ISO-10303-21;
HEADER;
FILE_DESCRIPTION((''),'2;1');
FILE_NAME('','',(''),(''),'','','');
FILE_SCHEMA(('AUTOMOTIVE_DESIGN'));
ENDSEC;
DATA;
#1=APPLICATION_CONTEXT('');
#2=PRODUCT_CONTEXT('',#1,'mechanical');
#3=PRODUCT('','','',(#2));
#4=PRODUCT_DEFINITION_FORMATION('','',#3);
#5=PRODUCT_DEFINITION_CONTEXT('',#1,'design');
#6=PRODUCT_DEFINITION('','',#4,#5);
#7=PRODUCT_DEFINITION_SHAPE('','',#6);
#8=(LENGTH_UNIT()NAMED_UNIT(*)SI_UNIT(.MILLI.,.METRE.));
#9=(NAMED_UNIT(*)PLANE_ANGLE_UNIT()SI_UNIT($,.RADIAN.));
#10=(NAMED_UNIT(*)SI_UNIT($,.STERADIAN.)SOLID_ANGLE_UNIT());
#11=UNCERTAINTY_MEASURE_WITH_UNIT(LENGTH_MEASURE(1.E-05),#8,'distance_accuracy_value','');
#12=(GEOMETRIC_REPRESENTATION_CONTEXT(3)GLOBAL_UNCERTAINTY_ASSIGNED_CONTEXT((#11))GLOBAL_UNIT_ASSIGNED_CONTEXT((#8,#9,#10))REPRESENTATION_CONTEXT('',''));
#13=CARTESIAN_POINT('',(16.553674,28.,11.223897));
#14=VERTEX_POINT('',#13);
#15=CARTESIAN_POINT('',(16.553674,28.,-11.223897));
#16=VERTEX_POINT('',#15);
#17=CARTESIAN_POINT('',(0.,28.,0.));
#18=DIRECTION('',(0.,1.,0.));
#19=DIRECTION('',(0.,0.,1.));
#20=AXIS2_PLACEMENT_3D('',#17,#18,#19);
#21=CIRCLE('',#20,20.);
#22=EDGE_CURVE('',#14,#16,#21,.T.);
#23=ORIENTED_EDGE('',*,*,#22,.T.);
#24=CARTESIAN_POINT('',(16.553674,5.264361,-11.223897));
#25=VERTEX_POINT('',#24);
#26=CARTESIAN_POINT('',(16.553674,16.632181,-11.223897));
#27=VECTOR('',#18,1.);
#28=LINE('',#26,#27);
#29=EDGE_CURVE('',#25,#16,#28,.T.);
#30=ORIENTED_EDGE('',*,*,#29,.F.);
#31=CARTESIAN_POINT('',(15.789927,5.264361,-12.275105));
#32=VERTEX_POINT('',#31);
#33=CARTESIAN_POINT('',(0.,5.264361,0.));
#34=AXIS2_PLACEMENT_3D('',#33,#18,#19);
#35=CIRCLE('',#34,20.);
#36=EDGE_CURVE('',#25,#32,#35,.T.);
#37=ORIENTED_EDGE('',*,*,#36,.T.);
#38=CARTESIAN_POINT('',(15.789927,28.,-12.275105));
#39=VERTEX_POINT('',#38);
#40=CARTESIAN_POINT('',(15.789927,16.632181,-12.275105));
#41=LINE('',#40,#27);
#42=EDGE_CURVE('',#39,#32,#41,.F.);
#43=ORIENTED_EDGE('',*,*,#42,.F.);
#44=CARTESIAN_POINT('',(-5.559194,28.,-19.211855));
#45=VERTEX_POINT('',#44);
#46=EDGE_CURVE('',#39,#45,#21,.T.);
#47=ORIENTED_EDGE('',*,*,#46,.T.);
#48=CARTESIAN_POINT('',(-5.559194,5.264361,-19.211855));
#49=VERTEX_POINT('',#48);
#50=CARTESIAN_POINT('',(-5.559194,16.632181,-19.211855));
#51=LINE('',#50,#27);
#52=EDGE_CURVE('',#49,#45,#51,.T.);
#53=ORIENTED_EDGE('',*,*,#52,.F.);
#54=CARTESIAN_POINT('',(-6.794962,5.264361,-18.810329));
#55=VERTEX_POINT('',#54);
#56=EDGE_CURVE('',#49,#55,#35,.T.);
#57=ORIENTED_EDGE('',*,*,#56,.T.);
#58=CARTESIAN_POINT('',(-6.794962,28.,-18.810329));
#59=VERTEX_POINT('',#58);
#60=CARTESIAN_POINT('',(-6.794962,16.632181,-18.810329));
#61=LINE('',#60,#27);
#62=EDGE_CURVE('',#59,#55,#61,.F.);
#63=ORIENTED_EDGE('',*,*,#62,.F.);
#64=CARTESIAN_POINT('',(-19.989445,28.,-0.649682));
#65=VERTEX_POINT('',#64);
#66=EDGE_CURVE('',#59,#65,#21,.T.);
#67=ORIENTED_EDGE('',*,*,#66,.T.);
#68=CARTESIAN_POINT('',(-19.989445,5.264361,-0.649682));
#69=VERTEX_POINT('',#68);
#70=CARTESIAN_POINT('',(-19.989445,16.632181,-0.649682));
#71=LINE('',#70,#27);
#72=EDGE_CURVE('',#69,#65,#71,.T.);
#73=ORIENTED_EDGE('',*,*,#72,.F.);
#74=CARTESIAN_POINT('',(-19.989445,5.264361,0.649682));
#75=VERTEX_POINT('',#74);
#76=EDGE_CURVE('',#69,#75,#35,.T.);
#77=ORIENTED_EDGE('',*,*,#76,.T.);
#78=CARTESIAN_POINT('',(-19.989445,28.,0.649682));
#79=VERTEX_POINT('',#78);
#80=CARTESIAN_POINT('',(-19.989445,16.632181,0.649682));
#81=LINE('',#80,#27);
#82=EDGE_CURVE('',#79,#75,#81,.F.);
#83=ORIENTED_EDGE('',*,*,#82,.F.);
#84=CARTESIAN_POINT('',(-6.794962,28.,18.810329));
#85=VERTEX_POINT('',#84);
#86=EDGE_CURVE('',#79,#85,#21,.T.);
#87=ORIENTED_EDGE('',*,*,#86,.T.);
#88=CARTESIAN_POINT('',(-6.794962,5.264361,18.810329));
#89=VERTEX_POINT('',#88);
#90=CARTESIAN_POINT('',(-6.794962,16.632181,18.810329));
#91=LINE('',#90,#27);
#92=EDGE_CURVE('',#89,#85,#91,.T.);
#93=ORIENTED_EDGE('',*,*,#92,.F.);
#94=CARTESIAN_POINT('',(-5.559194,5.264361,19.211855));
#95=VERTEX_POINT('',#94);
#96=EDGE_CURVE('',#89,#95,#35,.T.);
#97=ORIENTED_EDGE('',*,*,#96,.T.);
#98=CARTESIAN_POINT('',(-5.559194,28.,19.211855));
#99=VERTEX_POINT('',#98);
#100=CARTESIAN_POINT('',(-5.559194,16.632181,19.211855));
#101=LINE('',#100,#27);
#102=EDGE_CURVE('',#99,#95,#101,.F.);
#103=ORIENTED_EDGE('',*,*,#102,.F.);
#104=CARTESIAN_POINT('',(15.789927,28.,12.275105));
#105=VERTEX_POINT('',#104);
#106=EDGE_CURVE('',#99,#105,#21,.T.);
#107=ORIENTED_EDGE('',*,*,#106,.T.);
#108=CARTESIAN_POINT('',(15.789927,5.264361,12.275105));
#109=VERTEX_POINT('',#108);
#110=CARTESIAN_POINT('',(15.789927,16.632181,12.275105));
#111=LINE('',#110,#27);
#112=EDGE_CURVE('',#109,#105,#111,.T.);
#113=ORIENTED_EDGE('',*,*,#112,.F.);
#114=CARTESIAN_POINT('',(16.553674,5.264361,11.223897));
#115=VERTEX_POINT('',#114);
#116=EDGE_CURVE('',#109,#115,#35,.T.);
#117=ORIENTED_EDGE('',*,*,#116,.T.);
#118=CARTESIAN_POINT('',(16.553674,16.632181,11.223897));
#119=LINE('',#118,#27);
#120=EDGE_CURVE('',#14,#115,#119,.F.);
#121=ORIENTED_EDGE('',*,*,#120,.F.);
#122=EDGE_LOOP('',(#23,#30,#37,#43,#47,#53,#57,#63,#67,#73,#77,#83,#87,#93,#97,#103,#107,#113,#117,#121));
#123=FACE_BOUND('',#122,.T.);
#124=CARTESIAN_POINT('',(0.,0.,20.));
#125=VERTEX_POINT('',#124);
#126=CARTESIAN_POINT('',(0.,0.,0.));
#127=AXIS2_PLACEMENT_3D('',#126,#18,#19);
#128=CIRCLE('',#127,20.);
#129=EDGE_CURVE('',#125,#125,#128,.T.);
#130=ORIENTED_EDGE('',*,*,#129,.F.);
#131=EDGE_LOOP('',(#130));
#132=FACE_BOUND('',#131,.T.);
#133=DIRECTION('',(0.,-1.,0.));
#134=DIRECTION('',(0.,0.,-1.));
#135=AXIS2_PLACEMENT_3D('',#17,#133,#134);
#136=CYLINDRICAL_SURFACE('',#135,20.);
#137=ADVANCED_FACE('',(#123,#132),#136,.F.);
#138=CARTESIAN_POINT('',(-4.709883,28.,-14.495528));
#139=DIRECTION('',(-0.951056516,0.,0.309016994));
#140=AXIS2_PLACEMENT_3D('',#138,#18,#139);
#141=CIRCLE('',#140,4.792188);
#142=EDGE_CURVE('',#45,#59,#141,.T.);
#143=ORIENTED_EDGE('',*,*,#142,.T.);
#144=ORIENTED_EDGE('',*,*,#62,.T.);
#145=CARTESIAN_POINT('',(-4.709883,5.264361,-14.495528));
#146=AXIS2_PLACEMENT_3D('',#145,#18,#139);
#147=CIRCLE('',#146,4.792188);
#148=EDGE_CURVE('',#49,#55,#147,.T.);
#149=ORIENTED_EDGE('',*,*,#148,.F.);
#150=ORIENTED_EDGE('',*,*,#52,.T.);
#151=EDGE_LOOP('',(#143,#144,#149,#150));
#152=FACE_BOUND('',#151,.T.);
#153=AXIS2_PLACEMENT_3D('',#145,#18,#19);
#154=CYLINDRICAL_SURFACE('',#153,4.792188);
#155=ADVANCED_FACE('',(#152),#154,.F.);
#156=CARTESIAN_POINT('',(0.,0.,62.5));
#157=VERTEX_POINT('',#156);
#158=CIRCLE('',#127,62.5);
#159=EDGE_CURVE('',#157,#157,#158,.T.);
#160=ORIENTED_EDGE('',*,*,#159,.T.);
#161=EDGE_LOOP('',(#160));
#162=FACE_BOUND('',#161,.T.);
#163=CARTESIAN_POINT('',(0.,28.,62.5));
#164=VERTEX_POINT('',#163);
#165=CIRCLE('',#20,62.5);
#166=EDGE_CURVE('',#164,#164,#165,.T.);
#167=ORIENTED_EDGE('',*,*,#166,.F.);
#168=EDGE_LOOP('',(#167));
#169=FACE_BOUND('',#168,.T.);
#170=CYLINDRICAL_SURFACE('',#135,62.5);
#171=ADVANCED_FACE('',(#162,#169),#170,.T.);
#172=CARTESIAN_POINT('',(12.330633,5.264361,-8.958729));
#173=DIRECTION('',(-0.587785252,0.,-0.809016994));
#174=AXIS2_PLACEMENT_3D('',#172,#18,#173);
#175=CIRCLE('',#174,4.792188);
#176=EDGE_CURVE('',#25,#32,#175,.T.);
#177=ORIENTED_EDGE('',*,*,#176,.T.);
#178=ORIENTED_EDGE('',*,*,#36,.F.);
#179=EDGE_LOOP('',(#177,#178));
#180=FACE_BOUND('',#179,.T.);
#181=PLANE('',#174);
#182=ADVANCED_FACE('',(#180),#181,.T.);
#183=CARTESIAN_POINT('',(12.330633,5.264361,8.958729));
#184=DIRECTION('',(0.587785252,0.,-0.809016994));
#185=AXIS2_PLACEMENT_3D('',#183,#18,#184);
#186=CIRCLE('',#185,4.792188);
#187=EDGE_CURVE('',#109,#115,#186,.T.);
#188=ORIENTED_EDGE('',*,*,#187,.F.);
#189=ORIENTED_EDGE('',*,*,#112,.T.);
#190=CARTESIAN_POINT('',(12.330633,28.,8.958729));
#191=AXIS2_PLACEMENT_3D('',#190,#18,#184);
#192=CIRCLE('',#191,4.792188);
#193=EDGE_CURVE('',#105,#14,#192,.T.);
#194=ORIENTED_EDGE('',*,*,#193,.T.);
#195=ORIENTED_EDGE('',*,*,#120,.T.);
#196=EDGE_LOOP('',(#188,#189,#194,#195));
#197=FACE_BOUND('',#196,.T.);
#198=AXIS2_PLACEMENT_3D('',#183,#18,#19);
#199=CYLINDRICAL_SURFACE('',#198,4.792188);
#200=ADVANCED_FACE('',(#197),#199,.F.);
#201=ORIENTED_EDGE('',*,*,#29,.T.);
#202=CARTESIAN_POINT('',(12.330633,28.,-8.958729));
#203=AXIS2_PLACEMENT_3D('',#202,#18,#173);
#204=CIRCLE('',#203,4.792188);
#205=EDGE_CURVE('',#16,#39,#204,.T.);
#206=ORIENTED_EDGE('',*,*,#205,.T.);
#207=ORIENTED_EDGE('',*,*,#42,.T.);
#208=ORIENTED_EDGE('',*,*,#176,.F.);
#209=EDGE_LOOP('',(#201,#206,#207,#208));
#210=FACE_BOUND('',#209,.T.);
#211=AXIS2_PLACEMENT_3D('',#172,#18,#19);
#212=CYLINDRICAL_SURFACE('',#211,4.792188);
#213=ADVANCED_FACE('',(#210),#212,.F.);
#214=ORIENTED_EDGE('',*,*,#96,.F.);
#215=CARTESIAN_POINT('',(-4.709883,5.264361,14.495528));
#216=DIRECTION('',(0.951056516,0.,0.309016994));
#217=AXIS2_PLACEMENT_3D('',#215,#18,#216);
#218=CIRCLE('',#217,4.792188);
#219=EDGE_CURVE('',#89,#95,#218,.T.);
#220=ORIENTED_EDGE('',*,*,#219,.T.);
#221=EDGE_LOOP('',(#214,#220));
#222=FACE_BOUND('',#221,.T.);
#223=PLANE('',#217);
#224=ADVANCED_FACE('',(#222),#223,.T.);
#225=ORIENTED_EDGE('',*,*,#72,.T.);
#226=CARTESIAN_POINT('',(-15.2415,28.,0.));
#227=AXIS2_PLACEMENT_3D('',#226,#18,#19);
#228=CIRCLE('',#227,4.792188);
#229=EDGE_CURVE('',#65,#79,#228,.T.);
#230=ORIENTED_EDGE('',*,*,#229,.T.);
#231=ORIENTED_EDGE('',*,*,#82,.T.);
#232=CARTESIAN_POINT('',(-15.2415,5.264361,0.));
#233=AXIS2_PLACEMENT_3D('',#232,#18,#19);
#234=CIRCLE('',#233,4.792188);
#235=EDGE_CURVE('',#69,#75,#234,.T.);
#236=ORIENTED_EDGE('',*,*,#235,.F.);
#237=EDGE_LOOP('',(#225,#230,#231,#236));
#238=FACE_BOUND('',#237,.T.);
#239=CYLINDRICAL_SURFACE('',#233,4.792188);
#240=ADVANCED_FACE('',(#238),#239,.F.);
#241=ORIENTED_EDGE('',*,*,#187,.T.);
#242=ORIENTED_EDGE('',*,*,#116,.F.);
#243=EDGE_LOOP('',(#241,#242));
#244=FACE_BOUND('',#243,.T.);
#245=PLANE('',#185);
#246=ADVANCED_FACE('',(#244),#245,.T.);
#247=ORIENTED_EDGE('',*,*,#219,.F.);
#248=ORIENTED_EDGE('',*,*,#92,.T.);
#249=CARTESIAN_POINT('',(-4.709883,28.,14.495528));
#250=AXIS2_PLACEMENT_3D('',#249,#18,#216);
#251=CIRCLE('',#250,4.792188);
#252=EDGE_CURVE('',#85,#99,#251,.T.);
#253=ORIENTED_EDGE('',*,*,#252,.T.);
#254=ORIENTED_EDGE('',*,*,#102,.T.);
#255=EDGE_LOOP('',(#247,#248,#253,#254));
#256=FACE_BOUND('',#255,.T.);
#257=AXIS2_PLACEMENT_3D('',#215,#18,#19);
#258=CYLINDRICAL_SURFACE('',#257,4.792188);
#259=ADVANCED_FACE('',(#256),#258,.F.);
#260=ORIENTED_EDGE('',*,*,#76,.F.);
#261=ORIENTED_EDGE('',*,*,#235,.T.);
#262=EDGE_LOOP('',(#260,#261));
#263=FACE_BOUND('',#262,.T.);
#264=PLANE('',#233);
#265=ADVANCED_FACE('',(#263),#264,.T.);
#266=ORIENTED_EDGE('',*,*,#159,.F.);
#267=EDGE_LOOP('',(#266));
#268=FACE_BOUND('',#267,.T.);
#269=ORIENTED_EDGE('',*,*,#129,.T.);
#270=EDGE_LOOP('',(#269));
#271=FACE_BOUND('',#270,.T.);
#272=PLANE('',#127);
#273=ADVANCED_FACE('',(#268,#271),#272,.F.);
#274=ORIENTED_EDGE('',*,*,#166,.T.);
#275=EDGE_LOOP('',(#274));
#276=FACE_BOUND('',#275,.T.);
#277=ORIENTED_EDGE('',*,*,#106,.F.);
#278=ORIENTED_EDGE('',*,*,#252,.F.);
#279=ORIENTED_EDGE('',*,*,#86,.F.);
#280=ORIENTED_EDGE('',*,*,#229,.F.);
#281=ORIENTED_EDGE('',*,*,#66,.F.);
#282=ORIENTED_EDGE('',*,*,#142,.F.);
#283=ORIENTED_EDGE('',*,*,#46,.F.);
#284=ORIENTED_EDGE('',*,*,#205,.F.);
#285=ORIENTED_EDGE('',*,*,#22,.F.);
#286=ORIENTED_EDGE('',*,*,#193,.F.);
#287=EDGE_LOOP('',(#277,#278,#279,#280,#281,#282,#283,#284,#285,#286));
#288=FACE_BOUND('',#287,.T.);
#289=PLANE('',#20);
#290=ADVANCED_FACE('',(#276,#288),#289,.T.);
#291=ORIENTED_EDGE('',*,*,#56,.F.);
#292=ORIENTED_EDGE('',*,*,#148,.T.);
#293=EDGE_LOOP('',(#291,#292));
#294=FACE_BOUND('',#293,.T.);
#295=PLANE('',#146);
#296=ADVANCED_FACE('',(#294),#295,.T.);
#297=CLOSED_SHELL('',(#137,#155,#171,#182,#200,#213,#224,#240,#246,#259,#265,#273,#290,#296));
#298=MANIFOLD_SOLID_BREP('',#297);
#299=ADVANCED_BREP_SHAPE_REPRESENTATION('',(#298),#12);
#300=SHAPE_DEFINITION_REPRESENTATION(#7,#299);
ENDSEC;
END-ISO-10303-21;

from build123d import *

# Parameters (mm, degrees)
SKETCH1_R           = 62.5
BOSS_EXTRUDE1_DEPTH = 28
SKETCH2_R           = 20
CUT_EXTRUDE1_DEPTH  = 93.717312299
SKETCH3_R           = 4.792188025
CUT_EXTRUDE2_DEPTH  = 22.735638951
CIRPATTERN1_COUNT   = 5


with BuildPart() as part:
    # Sketch1 → Boss-Extrude1 (new body)
    with BuildSketch(Plane(origin=(0, 0, 0), x_dir=(1, 0, 0), z_dir=(0, 1, 0))):
        Circle(SKETCH1_R)
    extrude(amount=BOSS_EXTRUDE1_DEPTH)

    # Sketch2 → Cut-Extrude1 (cut, through all)
    with BuildSketch(Plane(origin=(0, 0, 0), x_dir=(1, 0, 0), z_dir=(0, 1, 0))):
        Circle(SKETCH2_R)
    extrude(amount=CUT_EXTRUDE1_DEPTH, mode=Mode.SUBTRACT)

    # Sketch3 → Cut-Extrude2 (cut)
    with BuildSketch(Plane(origin=(0, 28, 0), x_dir=(1, 0, 0), z_dir=(0, 1, 0))):
        with Locations((-15.241500266, 0)):
            Circle(SKETCH3_R)
    cut_extrude2 = extrude(amount=-CUT_EXTRUDE2_DEPTH, mode=Mode.SUBTRACT)

    # CirPattern1: Cut-Extrude2 ×5 about axis
    cirpattern1_axis = Axis((0, 0, 0), (0, 1, 0))
    for i in range(1, CIRPATTERN1_COUNT):
        add(cut_extrude2.rotate(cirpattern1_axis, i * 360 / CIRPATTERN1_COUNT), mode=Mode.SUBTRACT)


solid = part.part
